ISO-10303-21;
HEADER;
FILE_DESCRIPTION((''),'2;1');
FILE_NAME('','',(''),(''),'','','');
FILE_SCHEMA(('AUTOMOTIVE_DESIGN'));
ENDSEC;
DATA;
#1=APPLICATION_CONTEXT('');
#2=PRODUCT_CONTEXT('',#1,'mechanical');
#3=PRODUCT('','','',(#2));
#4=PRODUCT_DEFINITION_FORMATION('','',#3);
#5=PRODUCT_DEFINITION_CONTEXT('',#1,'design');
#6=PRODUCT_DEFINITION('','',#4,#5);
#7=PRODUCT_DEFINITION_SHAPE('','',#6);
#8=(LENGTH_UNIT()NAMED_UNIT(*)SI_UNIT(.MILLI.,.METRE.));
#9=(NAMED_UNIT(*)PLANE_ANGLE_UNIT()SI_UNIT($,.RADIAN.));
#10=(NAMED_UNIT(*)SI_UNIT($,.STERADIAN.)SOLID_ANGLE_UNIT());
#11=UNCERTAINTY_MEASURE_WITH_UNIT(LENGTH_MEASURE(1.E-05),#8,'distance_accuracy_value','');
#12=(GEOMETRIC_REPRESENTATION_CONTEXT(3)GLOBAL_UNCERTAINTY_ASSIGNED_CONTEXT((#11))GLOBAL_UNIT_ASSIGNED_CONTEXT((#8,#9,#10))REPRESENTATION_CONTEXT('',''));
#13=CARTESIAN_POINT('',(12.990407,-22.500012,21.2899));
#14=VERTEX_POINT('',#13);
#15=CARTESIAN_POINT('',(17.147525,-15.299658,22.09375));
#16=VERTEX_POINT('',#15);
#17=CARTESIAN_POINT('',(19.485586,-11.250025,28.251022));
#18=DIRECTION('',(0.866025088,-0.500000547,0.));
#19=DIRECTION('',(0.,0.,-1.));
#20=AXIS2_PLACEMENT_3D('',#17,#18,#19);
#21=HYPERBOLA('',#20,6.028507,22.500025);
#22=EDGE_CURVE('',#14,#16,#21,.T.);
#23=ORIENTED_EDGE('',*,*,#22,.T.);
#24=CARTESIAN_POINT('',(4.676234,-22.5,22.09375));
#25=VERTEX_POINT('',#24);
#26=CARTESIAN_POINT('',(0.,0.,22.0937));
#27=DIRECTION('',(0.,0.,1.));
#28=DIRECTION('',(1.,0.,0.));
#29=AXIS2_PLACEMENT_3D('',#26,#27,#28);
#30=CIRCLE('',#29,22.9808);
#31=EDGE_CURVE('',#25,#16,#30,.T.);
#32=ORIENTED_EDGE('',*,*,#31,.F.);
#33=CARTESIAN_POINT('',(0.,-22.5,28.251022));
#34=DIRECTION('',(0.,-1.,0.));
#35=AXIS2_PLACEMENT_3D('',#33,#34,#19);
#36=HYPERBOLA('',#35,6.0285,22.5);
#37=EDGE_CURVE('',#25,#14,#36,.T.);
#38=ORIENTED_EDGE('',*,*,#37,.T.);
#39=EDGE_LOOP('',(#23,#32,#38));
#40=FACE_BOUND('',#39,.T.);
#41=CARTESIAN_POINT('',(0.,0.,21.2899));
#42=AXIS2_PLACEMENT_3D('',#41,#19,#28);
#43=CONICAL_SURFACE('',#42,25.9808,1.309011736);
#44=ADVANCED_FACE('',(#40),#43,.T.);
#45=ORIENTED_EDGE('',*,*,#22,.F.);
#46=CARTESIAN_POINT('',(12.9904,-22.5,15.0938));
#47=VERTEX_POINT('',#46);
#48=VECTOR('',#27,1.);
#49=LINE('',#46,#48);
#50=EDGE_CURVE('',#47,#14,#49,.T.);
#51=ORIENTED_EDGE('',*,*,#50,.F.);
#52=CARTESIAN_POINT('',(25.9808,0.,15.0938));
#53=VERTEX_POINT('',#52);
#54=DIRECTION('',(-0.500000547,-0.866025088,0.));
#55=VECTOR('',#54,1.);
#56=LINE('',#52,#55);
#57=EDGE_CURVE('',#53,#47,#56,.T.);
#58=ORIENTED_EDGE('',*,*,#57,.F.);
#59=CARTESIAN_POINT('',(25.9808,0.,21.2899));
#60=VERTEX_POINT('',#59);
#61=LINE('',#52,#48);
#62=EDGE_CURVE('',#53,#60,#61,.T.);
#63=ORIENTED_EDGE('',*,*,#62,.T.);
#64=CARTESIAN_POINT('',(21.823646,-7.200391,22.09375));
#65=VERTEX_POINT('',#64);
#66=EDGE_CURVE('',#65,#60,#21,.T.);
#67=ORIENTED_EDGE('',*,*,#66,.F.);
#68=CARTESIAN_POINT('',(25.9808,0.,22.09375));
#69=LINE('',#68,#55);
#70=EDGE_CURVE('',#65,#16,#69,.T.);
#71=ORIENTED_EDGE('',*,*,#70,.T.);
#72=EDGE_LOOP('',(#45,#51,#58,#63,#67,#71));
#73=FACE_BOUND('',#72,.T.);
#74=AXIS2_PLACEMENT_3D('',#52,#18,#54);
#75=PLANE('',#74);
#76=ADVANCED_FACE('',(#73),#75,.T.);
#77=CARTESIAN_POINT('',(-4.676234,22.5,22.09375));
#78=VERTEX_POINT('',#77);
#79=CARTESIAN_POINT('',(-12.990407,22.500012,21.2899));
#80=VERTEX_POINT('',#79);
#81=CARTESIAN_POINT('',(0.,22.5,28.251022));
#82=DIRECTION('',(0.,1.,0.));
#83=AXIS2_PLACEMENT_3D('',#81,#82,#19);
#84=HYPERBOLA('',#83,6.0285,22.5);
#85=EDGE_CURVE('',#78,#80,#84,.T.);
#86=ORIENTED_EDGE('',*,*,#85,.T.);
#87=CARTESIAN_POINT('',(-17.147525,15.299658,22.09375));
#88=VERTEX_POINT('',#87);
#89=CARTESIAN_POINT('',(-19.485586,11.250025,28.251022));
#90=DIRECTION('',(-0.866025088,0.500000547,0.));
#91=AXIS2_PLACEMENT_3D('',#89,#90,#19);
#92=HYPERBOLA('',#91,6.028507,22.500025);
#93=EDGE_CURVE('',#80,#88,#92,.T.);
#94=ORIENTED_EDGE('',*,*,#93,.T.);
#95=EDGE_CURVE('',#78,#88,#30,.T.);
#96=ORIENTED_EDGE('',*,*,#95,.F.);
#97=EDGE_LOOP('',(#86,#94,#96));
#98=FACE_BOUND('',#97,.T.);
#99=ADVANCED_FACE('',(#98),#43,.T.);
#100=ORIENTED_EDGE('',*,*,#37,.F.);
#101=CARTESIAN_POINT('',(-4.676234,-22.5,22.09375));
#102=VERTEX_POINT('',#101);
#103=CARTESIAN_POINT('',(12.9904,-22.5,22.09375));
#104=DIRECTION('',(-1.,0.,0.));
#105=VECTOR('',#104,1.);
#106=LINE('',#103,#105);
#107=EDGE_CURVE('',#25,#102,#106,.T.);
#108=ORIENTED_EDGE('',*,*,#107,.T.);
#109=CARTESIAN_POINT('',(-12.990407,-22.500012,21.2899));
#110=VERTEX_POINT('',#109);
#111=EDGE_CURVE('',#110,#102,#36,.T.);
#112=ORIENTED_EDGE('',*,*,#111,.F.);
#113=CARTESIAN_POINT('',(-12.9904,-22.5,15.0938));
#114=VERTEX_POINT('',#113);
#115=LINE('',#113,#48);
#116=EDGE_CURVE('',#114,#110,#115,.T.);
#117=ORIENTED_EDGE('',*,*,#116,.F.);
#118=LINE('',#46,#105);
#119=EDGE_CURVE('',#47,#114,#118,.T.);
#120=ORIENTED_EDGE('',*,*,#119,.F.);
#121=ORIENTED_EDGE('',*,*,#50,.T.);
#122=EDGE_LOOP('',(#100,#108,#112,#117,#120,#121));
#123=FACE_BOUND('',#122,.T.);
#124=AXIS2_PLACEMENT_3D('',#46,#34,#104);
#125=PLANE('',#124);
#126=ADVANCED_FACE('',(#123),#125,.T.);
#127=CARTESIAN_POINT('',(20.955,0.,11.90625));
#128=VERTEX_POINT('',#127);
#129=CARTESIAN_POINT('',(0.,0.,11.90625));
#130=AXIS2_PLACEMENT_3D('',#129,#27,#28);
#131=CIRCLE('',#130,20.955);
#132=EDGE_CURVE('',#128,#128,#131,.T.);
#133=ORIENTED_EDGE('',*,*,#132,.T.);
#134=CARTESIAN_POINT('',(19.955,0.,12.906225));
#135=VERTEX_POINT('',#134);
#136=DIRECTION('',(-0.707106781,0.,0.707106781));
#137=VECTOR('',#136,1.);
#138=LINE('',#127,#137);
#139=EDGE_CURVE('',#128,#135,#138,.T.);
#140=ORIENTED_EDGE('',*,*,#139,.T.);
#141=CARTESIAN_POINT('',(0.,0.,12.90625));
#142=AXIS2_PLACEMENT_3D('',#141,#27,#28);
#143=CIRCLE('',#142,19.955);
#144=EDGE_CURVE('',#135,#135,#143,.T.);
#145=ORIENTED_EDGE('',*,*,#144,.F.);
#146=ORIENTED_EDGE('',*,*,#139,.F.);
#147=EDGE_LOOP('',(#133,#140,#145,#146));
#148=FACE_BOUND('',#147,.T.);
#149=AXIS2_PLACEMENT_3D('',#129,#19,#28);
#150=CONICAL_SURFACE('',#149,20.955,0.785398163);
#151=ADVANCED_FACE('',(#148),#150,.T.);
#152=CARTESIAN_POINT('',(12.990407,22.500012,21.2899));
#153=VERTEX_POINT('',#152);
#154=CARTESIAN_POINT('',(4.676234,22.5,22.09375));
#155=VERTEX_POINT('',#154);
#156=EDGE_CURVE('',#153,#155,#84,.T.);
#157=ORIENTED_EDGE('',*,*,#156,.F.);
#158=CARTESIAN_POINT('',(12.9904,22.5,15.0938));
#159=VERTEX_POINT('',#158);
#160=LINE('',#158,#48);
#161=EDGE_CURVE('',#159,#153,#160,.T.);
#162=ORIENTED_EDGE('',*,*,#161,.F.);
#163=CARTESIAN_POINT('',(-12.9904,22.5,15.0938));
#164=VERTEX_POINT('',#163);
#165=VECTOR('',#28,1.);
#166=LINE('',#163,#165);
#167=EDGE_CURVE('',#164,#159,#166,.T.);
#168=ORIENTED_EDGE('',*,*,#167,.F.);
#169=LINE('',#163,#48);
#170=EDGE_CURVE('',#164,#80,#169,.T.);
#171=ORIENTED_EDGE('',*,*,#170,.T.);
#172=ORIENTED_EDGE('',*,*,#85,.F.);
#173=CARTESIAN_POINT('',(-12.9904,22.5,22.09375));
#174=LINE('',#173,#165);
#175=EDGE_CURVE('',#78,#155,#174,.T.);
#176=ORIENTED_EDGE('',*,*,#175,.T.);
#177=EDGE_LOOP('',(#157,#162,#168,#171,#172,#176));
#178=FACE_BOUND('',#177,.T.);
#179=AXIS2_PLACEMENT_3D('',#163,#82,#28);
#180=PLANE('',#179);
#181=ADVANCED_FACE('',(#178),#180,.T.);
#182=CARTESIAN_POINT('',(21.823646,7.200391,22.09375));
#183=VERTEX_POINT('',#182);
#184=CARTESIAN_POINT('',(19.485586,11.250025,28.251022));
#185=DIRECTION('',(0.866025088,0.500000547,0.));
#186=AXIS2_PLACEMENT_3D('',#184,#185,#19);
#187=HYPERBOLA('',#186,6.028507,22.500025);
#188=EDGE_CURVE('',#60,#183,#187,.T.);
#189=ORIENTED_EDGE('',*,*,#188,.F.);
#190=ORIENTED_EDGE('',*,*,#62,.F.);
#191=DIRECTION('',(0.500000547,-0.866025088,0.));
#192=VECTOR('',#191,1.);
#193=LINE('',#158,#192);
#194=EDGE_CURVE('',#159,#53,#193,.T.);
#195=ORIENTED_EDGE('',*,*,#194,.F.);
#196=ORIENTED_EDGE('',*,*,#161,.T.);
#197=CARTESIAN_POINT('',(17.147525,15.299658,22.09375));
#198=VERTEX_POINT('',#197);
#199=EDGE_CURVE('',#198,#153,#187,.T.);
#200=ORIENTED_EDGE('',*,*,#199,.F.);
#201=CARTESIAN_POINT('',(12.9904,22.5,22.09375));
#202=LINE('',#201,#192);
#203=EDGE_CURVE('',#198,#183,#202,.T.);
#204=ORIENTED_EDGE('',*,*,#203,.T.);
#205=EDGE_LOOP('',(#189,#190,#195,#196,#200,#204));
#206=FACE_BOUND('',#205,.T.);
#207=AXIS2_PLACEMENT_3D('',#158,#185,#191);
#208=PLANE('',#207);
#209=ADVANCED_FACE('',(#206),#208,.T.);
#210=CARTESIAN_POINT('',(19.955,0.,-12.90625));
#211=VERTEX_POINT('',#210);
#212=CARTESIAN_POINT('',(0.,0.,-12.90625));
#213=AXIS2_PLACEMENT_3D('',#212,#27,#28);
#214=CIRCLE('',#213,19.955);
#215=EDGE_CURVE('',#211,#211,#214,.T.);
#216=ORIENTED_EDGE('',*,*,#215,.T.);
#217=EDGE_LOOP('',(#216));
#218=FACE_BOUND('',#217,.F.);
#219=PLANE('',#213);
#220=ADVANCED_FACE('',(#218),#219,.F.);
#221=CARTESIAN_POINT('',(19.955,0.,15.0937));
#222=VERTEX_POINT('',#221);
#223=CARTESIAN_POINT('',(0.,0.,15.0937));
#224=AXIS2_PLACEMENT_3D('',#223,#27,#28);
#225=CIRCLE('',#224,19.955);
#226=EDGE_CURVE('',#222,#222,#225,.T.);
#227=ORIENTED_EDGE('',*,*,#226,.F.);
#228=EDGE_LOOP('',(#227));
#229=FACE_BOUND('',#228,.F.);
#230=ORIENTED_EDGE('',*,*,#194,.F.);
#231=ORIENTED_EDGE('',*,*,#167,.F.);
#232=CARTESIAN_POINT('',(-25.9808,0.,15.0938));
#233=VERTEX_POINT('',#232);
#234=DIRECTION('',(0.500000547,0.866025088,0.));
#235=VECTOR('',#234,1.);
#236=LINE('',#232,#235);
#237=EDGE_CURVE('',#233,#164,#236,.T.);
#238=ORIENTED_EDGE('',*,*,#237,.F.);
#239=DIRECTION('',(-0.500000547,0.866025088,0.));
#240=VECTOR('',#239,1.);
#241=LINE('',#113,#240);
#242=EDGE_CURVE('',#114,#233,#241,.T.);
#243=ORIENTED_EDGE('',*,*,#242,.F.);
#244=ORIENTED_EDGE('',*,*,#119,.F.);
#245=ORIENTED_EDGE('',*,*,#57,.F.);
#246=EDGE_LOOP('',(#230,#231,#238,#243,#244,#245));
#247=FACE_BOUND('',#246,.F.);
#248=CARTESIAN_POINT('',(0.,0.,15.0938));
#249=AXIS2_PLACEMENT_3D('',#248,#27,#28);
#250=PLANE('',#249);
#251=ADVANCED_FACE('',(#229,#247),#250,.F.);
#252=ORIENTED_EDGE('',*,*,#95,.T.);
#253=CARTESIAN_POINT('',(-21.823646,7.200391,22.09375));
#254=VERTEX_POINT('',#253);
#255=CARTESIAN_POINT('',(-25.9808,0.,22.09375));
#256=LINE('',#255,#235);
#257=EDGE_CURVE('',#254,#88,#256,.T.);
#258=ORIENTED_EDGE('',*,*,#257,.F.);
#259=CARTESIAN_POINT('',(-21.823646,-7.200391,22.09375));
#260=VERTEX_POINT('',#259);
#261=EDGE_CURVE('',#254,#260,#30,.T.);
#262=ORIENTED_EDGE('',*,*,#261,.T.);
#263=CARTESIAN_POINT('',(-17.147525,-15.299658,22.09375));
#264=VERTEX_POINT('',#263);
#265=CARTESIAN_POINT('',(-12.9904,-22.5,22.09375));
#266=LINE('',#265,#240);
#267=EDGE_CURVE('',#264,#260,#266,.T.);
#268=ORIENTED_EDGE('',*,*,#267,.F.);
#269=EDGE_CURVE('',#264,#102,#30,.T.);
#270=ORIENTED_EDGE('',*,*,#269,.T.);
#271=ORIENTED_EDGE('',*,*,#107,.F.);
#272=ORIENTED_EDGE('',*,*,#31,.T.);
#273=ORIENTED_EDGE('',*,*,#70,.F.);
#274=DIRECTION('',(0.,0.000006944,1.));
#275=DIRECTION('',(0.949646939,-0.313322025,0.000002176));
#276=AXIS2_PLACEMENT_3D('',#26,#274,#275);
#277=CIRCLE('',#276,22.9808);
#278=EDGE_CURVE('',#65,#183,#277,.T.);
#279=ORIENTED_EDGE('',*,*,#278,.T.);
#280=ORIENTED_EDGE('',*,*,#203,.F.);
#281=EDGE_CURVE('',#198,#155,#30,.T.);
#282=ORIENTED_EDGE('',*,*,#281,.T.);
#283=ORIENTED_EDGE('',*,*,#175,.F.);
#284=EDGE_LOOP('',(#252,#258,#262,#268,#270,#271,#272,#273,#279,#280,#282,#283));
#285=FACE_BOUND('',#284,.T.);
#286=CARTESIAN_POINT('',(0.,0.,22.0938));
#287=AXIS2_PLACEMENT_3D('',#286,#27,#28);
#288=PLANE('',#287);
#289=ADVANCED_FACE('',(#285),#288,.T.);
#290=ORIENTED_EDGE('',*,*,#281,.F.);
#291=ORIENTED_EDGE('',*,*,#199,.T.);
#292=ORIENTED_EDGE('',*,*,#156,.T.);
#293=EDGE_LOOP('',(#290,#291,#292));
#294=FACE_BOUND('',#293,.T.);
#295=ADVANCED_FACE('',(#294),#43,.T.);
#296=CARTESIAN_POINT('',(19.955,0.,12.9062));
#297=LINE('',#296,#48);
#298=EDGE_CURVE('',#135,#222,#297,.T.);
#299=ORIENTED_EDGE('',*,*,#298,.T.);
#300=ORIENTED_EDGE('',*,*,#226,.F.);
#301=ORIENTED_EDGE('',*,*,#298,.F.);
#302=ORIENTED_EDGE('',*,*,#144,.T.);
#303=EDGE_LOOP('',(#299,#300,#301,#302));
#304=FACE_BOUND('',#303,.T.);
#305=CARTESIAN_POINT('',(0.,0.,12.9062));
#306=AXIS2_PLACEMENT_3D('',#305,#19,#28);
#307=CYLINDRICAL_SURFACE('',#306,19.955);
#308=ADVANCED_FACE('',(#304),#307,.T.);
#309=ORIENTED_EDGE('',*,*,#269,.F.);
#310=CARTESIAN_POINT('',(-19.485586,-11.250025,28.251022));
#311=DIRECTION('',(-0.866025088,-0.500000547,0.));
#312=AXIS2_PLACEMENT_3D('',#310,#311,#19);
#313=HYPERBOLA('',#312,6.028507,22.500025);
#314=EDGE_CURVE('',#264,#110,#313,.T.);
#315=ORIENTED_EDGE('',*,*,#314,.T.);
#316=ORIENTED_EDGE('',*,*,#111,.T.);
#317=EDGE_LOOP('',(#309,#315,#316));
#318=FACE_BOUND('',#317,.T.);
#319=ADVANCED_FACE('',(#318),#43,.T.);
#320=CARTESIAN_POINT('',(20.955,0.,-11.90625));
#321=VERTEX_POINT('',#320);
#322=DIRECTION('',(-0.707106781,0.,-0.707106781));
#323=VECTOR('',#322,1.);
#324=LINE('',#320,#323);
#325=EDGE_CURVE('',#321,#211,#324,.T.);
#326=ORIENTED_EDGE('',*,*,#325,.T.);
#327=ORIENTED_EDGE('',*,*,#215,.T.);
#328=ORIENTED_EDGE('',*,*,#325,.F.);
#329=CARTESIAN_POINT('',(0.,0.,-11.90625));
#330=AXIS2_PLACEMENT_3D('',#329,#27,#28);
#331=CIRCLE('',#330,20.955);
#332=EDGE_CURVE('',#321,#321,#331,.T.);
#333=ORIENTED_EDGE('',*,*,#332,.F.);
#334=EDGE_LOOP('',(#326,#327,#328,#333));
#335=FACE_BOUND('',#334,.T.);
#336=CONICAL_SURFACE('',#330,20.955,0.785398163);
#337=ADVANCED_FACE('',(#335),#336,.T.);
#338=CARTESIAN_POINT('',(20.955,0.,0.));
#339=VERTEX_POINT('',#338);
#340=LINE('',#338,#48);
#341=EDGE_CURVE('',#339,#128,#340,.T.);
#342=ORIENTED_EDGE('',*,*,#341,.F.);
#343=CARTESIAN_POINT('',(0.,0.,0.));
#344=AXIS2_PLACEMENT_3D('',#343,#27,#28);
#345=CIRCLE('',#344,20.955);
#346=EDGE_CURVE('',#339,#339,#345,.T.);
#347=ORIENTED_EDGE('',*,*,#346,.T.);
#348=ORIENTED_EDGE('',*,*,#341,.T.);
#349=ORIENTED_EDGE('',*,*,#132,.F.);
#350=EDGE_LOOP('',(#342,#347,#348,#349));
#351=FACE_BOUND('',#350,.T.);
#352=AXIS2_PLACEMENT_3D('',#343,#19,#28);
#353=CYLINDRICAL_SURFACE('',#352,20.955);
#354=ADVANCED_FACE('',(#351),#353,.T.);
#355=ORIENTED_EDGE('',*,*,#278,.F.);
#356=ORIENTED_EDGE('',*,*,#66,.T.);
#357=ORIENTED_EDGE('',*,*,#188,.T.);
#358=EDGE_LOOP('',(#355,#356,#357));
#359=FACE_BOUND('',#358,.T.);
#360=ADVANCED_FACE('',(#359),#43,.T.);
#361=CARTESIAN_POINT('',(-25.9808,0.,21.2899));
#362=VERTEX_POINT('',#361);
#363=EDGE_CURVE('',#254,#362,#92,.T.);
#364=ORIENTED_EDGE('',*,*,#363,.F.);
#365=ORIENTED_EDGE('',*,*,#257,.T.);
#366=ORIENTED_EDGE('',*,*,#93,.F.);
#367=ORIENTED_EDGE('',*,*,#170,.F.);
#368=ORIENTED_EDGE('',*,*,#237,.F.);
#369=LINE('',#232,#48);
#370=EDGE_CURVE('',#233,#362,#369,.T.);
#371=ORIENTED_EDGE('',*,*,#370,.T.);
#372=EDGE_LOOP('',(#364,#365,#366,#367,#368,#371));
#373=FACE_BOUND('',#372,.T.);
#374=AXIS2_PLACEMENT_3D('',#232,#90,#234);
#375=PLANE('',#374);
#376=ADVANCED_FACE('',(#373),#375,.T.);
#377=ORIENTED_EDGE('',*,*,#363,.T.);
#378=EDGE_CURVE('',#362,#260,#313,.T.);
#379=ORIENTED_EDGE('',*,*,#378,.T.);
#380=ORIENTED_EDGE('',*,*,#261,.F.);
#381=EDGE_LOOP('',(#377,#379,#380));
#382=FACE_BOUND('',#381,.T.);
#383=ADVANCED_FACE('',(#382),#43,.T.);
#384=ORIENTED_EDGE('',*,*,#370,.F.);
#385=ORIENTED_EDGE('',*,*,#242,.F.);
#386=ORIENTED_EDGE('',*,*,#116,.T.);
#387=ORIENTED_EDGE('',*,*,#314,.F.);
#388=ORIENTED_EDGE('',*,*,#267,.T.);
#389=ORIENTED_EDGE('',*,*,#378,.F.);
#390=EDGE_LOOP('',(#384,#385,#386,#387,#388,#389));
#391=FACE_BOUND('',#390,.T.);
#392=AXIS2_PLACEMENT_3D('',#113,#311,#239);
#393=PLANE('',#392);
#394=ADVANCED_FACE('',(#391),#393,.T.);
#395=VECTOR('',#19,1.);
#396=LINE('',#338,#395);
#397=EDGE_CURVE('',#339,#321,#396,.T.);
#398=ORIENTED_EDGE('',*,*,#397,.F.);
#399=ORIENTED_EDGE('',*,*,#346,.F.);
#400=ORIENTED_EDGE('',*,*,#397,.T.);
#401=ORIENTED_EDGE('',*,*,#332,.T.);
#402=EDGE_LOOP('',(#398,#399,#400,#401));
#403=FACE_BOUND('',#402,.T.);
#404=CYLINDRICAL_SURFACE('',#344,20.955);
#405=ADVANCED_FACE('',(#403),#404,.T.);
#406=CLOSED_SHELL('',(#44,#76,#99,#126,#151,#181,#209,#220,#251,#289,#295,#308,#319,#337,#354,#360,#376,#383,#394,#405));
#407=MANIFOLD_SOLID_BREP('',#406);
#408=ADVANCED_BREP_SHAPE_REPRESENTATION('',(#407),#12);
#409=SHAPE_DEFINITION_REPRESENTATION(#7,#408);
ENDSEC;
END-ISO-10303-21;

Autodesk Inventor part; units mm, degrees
ref_plane "YZ Plane" through (0, 0, 0) normal (1, 0, 0) x (0, 1, 0)
ref_plane "XZ Plane" through (0, 0, 0) normal (0, 1, 0) x (-1, 0, 0)
ref_plane "XY Plane" through (0, 0, 0) normal (0, 0, 1) x (1, 0, 0)
sketch "Szkic7" plane through (0, 0, 0) normal (0, 0, 1) x (1, 0, 0)
  circle A0 centre (0, 0) radius 20.955
  dimension "d35" = 41.91
extrude "Wyciągnięcie proste2" add sketch "Szkic7" along normal mid plane 25.8125
chamfer "Faza2" distance 1 angle 45 1 edges at (-20.955, 0, 12.9062)
sketch "Szkic9" plane through (0, 0, 12.9062) normal (0, 0, 1) x (1, 0, 0)
  circle A0 centre (0, 0) radius 19.955 projected
extrude "Wyciągnięcie proste3" add sketch "Szkic9" along normal blind 2.1875
sketch "Szkic10" plane through (0, 0, 15.0938) normal (0, 0, 1) x (1, 0, 0)
  line L0 (-12.9904, 22.5) -> (12.9904, 22.5)
  line L1 (12.9904, 22.5) -> (25.9808, 0)
  line L2 (25.9808, 0) -> (12.9904, -22.5)
  line L3 (12.9904, -22.5) -> (-12.9904, -22.5)
  line L4 (-12.9904, -22.5) -> (-25.9808, 0)
  line L5 (-25.9808, 0) -> (-12.9904, 22.5)
  line L6 (0, 29.337) -> (0, -29.337) construction
  line L7 (-29.337, 0) -> (29.337, 0) construction
  point P0 (0, 0)
  point P1 (0, 0)
  point P2 (0, 22.5)
  dimension "d44" = 45
extrude "Wyciągnięcie proste4" add sketch "Szkic10" along normal blind 7
sketch "Szkic12" plane through (0, 0, 0) normal (0, 1, 0) x (-1, 0, 0)
  line L0 (0, -2.1463) -> (0, 12.8775) construction
  line L1 (-12.9904, 15.0938) -> (-12.9904, 22.0937) construction
  line L2 (-25.9808, 22.0937) -> (-12.9904, 22.0937) construction
  line L3 (-25.9808, 15.0938) -> (-25.9808, 22.0937) projected
  line L4 (-25.9808, 21.2899) -> (-22.9808, 22.0937)
  line L5 (-25.9808, 22.0937) -> (-12.9904, 22.0937) projected
  line L6 (-25.9808, 15.0938) -> (-12.9904, 15.0938) projected
  point P0 (0, 0)
  dimension "d50" = 15
  dimension "d51" = 3
revolve "Obrót2" cut sketch "Szkic12" angle 360 about axis through (0, 0, -10) along (0, 0, 1)
thread "Gwint3" size "G41.91x2.309" designation "G 1 1/4" class "A" standard "ISO Pipe Threads" full length
chamfer "Faza3" distance 1 angle 45 1 edges at (-20.955, 0, -12.9062)
equation "\"d35\" = OD"
equation "\"d36\" = 0.7375 * L"
equation "\"d42\" = 0.0625 * L"
equation "\"d44\" = SW"
equation "\"d45\" = 0.2 * L"
equation "\"d51\" = 0.0666667 * SW"
equation "\"SzerokośćGięciaPodcięcia\" = Grubość"
equation "\"RozmiarPodcięciaNarożnika\" = 4 * Grubość"
equation "\"PromieńPrzejścia\" = PromieńGięcia"
equation "\"Rozmiar_promienia_Jacobiego\" = PromieńGięcia"
equation "\"Wielk_odstępu\" = Grubość"
equation "\"d2\" = PromieńGięcia"
equation "\"d23\" = PromieńGięcia"
equation "\"OD\" = 41.91"
equation "\"SW\" = 45"
equation "\"L\" = 35"
equation "\"Grubość\" = 1.5"
equation "\"PromieńGięcia\" = 3"
properties part number "Korek sześciokątny BSP 1 1/4'' L=35" material "304"
